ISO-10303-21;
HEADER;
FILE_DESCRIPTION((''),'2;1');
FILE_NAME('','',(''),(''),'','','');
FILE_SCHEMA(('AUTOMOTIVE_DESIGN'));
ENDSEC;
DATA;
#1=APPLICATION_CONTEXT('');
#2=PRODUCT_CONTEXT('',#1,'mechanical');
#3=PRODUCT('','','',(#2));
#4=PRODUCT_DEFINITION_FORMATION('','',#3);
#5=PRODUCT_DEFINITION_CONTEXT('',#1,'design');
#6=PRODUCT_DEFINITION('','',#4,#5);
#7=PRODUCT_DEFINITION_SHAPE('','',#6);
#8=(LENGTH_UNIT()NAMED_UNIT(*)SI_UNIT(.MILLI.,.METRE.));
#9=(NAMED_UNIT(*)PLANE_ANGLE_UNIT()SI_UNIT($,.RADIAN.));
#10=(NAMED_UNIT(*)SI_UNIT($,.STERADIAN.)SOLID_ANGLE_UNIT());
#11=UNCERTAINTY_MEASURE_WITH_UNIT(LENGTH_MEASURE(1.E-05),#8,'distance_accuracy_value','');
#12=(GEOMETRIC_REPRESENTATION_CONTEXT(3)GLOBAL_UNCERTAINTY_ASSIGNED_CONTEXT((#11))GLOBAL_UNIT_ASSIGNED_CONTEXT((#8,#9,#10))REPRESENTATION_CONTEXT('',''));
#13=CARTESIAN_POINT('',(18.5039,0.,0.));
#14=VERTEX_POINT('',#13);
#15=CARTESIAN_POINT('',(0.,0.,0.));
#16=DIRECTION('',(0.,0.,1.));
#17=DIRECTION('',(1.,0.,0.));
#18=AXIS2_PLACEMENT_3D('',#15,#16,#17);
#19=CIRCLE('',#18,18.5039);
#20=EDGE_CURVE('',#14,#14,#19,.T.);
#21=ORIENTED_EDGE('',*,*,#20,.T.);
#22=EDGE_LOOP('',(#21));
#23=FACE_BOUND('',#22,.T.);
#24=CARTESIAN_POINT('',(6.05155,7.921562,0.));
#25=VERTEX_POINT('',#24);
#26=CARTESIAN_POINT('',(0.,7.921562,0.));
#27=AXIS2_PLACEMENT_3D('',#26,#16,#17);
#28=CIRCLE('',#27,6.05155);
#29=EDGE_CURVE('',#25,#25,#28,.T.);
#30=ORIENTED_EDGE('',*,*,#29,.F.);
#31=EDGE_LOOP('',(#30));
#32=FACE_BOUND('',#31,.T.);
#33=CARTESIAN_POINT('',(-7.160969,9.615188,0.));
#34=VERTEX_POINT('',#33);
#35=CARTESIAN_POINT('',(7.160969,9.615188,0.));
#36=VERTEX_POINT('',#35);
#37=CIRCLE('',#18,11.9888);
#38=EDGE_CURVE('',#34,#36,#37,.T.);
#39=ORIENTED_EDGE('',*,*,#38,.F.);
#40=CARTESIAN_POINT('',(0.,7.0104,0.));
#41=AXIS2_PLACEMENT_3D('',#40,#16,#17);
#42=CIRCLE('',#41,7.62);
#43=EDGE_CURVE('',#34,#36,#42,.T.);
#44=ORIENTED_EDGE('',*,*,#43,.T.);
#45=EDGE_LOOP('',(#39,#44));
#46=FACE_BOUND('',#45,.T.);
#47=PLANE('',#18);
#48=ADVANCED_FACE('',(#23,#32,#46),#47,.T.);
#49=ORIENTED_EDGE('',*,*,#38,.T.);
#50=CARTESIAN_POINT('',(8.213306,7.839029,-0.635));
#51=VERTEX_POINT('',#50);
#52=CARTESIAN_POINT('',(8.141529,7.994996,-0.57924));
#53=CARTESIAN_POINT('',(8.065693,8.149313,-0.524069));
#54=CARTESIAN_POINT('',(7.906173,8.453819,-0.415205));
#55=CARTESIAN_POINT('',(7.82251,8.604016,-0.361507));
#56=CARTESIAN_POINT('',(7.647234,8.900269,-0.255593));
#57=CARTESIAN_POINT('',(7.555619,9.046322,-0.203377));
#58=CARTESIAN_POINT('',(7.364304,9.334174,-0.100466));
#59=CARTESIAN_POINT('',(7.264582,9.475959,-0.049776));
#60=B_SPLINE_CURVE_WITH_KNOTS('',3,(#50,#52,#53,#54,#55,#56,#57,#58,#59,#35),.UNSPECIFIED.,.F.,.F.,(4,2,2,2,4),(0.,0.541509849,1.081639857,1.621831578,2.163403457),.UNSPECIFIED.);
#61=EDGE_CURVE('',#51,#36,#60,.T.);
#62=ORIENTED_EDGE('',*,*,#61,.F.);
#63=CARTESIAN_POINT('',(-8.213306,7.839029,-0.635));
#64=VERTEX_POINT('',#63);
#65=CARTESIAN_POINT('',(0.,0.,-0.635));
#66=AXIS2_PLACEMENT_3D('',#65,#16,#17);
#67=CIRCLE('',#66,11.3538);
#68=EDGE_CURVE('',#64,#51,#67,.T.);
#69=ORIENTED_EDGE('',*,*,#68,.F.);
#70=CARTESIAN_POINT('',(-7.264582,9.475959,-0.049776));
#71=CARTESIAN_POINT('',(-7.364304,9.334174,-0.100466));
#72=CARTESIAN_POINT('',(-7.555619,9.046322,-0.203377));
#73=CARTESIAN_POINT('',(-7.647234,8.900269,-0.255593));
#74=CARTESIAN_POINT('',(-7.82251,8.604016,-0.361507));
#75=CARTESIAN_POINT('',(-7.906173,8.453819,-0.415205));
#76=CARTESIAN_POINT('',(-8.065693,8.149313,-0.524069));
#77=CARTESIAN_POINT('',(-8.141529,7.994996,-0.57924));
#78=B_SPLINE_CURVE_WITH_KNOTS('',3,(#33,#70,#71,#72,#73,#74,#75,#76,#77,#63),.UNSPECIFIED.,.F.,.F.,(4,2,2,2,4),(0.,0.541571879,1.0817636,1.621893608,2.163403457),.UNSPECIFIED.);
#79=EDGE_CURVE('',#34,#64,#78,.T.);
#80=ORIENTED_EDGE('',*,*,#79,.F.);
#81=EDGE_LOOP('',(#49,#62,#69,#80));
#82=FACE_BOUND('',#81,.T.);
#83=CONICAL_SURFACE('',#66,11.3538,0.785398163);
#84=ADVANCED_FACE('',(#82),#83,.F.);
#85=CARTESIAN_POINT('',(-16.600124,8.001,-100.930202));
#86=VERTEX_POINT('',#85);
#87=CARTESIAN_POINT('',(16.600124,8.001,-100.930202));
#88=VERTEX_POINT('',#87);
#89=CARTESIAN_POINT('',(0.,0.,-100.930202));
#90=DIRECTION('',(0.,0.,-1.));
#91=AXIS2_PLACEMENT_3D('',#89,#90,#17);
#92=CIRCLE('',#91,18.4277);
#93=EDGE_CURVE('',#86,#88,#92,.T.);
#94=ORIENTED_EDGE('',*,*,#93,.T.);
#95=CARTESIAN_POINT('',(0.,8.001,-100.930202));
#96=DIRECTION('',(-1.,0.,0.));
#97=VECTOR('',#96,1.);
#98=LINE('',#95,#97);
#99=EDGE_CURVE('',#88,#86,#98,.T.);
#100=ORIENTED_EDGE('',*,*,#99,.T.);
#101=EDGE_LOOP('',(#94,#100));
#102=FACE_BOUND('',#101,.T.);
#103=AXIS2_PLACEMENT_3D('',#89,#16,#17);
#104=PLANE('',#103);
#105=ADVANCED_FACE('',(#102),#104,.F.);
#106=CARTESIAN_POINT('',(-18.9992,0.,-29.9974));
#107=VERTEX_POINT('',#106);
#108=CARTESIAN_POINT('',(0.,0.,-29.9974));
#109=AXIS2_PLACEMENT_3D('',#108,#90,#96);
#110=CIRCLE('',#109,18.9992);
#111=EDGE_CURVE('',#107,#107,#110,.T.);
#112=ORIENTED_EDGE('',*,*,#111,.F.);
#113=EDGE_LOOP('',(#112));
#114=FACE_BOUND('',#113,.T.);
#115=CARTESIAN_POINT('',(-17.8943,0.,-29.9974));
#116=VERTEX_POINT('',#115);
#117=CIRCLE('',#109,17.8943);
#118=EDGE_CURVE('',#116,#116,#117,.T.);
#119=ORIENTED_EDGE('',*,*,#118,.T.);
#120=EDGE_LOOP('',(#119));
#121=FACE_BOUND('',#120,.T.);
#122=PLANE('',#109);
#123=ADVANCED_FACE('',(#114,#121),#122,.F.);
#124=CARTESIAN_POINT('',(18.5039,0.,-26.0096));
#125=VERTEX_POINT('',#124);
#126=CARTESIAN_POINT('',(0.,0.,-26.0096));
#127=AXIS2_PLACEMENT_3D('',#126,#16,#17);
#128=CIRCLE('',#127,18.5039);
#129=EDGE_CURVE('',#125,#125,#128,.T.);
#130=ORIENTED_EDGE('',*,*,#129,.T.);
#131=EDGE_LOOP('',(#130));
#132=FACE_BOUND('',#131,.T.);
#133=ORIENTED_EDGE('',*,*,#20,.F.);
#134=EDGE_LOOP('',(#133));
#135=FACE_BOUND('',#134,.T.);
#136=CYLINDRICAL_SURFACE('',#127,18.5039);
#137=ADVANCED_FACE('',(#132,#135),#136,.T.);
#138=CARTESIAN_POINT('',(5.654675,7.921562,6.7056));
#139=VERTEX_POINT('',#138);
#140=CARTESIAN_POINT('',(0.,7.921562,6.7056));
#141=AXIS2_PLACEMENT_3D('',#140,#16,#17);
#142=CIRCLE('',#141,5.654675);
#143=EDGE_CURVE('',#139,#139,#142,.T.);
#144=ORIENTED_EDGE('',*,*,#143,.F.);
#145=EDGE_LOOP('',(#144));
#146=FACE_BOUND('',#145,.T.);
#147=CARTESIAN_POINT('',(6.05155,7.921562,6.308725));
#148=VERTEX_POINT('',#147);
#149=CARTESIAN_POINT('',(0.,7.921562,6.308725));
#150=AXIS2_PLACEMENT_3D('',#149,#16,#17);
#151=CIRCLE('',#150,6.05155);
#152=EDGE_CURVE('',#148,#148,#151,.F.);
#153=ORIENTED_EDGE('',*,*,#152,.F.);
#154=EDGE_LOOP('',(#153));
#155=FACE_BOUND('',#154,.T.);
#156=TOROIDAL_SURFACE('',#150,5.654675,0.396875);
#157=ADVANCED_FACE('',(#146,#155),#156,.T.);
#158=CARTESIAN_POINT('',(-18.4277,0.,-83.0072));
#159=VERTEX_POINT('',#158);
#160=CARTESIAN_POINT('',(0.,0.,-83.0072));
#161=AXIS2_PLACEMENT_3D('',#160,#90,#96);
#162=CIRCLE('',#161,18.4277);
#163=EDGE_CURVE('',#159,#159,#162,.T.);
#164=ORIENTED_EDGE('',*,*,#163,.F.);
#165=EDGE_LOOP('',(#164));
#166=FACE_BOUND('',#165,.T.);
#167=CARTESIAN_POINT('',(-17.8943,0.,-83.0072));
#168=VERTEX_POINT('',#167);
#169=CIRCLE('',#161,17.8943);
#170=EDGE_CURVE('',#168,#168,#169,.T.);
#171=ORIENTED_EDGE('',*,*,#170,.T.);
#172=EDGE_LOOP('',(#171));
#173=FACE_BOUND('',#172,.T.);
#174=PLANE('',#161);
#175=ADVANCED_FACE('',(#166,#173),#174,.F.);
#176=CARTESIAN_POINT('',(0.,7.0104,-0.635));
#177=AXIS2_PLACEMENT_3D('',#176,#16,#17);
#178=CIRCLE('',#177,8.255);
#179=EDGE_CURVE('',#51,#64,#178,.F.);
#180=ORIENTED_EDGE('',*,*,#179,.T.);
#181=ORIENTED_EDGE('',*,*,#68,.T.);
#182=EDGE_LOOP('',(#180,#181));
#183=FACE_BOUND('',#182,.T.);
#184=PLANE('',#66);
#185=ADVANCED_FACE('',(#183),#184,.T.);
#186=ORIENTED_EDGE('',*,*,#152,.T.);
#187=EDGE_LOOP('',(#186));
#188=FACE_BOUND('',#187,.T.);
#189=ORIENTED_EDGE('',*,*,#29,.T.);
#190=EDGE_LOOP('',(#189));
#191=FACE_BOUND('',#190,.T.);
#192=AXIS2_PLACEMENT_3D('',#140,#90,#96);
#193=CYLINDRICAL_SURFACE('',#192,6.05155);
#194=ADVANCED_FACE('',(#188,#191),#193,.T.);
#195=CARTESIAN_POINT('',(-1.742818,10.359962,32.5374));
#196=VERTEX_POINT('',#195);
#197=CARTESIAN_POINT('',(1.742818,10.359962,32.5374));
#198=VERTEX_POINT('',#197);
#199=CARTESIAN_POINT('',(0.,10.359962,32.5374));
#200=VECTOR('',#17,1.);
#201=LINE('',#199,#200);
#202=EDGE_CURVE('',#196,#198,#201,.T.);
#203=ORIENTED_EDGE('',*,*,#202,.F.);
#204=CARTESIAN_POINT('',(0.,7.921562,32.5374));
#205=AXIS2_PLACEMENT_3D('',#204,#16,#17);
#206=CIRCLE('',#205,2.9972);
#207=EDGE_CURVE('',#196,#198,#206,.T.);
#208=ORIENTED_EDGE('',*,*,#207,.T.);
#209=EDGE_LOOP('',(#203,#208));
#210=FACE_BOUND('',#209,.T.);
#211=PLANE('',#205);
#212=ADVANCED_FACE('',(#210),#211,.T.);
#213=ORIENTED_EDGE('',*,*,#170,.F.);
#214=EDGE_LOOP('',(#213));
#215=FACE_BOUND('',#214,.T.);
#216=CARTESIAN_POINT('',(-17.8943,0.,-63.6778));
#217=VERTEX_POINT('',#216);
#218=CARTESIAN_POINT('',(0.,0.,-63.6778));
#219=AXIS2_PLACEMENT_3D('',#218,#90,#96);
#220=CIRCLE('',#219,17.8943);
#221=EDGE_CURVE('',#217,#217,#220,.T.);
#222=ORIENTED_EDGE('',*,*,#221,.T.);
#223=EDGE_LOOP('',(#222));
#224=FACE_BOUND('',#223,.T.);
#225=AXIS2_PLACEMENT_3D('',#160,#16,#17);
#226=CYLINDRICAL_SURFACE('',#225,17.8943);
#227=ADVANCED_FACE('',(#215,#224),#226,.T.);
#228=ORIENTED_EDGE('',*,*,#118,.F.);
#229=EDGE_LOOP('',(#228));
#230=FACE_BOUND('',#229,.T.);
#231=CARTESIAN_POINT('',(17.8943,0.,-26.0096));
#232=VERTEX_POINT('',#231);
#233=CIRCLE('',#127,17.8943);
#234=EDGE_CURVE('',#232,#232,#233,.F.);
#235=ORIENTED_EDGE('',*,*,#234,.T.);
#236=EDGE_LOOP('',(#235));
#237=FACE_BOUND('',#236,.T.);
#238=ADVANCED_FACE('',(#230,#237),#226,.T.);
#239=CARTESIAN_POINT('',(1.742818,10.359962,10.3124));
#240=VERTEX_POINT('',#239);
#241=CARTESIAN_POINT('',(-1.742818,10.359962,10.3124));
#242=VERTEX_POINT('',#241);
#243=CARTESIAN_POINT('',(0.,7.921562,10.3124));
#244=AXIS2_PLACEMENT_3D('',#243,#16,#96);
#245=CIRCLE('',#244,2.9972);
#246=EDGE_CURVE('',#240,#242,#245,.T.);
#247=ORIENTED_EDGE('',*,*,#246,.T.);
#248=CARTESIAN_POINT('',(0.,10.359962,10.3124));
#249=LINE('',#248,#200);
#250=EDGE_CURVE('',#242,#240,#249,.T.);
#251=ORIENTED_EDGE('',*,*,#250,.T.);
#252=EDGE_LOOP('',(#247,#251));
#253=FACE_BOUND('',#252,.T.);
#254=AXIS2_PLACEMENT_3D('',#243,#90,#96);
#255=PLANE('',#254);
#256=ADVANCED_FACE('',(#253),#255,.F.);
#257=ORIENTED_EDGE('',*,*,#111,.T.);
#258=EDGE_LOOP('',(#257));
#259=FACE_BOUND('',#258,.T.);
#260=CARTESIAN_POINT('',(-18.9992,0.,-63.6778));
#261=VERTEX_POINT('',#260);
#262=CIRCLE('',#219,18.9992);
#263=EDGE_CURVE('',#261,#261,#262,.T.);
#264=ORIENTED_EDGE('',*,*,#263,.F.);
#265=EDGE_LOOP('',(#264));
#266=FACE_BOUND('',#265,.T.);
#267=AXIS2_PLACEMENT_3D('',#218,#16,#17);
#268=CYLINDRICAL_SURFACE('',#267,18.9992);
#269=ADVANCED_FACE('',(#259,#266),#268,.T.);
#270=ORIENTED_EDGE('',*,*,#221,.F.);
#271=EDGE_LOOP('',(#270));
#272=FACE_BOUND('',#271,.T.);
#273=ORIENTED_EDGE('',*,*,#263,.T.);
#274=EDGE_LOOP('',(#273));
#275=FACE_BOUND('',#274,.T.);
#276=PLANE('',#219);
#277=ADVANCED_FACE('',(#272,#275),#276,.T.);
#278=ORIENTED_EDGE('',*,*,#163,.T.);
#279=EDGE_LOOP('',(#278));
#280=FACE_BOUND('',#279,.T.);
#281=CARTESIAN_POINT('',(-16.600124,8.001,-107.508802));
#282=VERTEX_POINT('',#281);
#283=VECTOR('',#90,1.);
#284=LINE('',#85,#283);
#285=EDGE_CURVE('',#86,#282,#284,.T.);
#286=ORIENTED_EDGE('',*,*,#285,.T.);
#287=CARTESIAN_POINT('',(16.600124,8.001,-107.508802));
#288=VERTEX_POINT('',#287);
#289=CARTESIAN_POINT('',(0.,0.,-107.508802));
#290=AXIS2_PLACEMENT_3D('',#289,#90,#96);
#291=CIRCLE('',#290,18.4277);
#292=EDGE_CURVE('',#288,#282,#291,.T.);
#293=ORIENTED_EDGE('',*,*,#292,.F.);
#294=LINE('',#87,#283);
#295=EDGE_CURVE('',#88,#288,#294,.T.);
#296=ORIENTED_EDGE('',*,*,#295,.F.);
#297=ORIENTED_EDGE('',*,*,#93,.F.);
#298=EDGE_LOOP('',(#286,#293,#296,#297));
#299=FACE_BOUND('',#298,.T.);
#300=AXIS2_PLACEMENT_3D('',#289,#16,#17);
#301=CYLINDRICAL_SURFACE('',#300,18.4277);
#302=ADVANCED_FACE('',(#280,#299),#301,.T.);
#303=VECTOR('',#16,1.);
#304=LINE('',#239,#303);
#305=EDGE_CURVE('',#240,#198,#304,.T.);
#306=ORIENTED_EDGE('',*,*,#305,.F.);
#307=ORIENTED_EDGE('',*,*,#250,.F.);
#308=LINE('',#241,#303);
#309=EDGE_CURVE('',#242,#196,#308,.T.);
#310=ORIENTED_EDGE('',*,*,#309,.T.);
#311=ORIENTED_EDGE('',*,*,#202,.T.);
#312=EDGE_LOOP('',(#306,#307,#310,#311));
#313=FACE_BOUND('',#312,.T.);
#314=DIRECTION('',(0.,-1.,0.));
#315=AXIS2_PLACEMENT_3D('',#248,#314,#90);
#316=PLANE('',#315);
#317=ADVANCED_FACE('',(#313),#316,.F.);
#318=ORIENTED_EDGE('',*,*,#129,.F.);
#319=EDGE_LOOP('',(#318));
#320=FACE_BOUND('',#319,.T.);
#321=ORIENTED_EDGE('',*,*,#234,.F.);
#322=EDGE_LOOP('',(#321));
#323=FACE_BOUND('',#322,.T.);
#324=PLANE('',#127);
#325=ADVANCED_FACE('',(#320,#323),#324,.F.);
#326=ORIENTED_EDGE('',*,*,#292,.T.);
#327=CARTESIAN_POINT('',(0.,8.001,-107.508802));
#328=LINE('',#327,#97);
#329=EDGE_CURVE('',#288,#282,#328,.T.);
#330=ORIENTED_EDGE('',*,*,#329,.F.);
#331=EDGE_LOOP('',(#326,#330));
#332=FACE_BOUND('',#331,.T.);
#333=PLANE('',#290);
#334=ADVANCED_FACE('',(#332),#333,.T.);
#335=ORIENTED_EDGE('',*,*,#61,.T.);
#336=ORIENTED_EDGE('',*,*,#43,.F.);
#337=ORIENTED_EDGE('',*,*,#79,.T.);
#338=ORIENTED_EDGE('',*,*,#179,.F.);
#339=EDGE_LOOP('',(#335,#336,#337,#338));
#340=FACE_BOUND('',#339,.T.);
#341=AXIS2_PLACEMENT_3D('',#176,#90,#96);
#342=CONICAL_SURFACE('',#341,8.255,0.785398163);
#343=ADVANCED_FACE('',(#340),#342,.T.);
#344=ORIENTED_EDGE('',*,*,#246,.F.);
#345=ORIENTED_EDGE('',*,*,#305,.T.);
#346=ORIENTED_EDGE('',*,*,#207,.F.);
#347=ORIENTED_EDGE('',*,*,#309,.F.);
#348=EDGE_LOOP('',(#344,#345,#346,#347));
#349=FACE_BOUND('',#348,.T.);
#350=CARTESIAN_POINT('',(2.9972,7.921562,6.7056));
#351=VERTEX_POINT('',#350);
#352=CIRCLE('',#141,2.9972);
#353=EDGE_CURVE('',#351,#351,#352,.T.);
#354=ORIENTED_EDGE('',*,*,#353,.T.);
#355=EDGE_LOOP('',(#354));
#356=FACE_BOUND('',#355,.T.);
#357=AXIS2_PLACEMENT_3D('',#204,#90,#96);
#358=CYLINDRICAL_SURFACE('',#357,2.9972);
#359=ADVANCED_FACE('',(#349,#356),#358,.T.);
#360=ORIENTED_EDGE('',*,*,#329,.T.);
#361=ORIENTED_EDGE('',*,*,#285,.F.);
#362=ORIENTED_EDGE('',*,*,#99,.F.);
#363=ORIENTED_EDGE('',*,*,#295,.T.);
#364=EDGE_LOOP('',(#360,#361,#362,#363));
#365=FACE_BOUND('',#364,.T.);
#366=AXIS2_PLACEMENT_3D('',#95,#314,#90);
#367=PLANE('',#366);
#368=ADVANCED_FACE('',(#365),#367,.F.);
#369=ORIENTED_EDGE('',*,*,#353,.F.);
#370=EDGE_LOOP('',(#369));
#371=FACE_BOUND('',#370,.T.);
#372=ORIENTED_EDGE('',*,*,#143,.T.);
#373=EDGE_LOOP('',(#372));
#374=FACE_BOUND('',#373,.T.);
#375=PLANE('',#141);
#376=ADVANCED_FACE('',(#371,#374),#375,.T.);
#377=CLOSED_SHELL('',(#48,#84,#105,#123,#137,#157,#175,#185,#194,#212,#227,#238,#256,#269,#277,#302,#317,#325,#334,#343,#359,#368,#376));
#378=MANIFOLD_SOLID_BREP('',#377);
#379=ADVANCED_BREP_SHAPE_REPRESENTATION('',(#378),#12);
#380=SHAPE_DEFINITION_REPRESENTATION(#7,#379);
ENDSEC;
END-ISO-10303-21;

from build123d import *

# Parameters (mm, degrees)
SKETCH1_R            = 18.5039
GEARBOX_DEPTH        = 26.0096
SKETCH2_R            = 17.8943
BOSS_EXTRUDE2_DEPTH  = 56.9976
SKETCH3_R            = 18.9992
WRAP_DEPTH           = 33.6804
SKETCH4_R            = 18.4277
BOSS_EXTRUDE4_DEPTH  = 24.501601563
CONNECTDOR_START     = -6.5786
CONNECTDOR_CUT_DEPTH = 6.5786
SKETCH6_R            = 11.9888
CENTER_DISH_DEPTH    = 0.635
SKETCH7_R            = 7.62
BOSS_EXTRUDE5_DEPTH  = 0.635
CHAMFER4_SIZE        = 0.635
CHAMFER5_SIZE        = 0.635
SKETCH8_R            = 6.05155
SHAFT_COLLAR_DEPTH   = 6.7056
FILLET1_R            = 0.396875
SKETCH9_R            = 2.9972
BOSS_EXTRUDE7_DEPTH  = 25.8318
CUT_EXTRUDE3_START   = -22.225
CUT_EXTRUDE3_DEPTH   = 22.225


with BuildPart() as part:
    # Sketch1 → Gearbox (new body)
    with BuildSketch(Plane.XY):
        Circle(SKETCH1_R)
    extrude(amount=-GEARBOX_DEPTH)

    # Sketch2 → Boss-Extrude2 (add)
    with BuildSketch(Plane(origin=(0, 0, -26.0096), x_dir=(-1, 0, 0), z_dir=(0, 0, -1))):
        with Locations(Location((0, 0, 0), (0, 0, 180))):
            Circle(SKETCH2_R)
    extrude(amount=BOSS_EXTRUDE2_DEPTH)

    # Sketch3 → Wrap (add)
    with BuildSketch(Plane(origin=(0, 0, -29.9974), x_dir=(-1, 0, 0), z_dir=(0, 0, -1))):
        Circle(SKETCH3_R)
    extrude(amount=WRAP_DEPTH)

    # Sketch4 → Boss-Extrude4 (add)
    with BuildSketch(Plane(origin=(0, 0, -83.0072), x_dir=(-1, 0, 0), z_dir=(0, 0, -1))):
        with Locations(Location((0, 0, 0), (0, 0, 180))):
            Circle(SKETCH4_R)
    extrude(amount=BOSS_EXTRUDE4_DEPTH)

    # Connector → Connectdor Cut (cut)
    with BuildSketch(Plane(origin=(0, 0, -107.508801563), x_dir=(-1, 0, 0), z_dir=(0, 0, -1)).offset(CONNECTDOR_START)):
        with BuildLine():
            Line((0, 8.001), (16.600124285, 8.001))
            ThreePointArc((16.600124285, 8.001), (0, 18.4277), (-16.600124285, 8.001))
            Line((-16.600124285, 8.001), (0, 8.001))
        make_face()
    extrude(amount=CONNECTDOR_CUT_DEPTH, mode=Mode.SUBTRACT)

    # Sketch6 → Center DIsh (cut)
    with BuildSketch(Plane.XY):
        Circle(SKETCH6_R)
    extrude(amount=-CENTER_DISH_DEPTH, mode=Mode.SUBTRACT)

    # Sketch7 → Boss-Extrude5 (add)
    with BuildSketch(Plane.XY.offset(-0.635)):
        with Locations((0, 7.0104)):
            Circle(SKETCH7_R)
    extrude(amount=BOSS_EXTRUDE5_DEPTH)

    # Chamfer4
    chamfer4_edges = [part.edges().sort_by_distance(p)[0] for p in [
        (0, -0.6096, -0.635),
    ]]
    chamfer(chamfer4_edges, length=CHAMFER4_SIZE - 0.0001)  # a hair under: the kernel refuses the full size

    # Chamfer5
    chamfer5_edges = [part.edges().sort_by_distance(p)[0] for p in [
        (0, -11.9888, -0.635),
    ]]
    chamfer(chamfer5_edges, length=CHAMFER5_SIZE - 0.0001)  # a hair under: the kernel refuses the full size

    # Sketch8 → Shaft Collar (add)
    with BuildSketch(Plane.XY):
        with Locations((0, 7.92156223)):
            Circle(SKETCH8_R)
    extrude(amount=SHAFT_COLLAR_DEPTH)

    # Fillet1
    fillet1_edges = [part.edges().sort_by_distance(p)[0] for p in [
        (-6.05155, 7.92156223, 6.7056),
    ]]
    fillet(fillet1_edges, radius=FILLET1_R)

    # Sketch9 → Boss-Extrude7 (add)
    with BuildSketch(Plane.XY.offset(6.7056)):
        with Locations((0, 7.92156223)):
            Circle(SKETCH9_R)
    extrude(amount=BOSS_EXTRUDE7_DEPTH)

    # Sketch10 → Cut-Extrude3 (cut)
    with BuildSketch(Plane.XY.offset(32.5374).offset(CUT_EXTRUDE3_START)):
        with BuildLine():
            Line((0, 10.35996223), (-1.742817627, 10.35996223))
            ThreePointArc((-1.742817627, 10.35996223), (0, 10.91876223), (1.742817627, 10.35996223))
            Line((1.742817627, 10.35996223), (0, 10.35996223))
        make_face()
    extrude(amount=CUT_EXTRUDE3_DEPTH, mode=Mode.SUBTRACT)


solid = part.part
